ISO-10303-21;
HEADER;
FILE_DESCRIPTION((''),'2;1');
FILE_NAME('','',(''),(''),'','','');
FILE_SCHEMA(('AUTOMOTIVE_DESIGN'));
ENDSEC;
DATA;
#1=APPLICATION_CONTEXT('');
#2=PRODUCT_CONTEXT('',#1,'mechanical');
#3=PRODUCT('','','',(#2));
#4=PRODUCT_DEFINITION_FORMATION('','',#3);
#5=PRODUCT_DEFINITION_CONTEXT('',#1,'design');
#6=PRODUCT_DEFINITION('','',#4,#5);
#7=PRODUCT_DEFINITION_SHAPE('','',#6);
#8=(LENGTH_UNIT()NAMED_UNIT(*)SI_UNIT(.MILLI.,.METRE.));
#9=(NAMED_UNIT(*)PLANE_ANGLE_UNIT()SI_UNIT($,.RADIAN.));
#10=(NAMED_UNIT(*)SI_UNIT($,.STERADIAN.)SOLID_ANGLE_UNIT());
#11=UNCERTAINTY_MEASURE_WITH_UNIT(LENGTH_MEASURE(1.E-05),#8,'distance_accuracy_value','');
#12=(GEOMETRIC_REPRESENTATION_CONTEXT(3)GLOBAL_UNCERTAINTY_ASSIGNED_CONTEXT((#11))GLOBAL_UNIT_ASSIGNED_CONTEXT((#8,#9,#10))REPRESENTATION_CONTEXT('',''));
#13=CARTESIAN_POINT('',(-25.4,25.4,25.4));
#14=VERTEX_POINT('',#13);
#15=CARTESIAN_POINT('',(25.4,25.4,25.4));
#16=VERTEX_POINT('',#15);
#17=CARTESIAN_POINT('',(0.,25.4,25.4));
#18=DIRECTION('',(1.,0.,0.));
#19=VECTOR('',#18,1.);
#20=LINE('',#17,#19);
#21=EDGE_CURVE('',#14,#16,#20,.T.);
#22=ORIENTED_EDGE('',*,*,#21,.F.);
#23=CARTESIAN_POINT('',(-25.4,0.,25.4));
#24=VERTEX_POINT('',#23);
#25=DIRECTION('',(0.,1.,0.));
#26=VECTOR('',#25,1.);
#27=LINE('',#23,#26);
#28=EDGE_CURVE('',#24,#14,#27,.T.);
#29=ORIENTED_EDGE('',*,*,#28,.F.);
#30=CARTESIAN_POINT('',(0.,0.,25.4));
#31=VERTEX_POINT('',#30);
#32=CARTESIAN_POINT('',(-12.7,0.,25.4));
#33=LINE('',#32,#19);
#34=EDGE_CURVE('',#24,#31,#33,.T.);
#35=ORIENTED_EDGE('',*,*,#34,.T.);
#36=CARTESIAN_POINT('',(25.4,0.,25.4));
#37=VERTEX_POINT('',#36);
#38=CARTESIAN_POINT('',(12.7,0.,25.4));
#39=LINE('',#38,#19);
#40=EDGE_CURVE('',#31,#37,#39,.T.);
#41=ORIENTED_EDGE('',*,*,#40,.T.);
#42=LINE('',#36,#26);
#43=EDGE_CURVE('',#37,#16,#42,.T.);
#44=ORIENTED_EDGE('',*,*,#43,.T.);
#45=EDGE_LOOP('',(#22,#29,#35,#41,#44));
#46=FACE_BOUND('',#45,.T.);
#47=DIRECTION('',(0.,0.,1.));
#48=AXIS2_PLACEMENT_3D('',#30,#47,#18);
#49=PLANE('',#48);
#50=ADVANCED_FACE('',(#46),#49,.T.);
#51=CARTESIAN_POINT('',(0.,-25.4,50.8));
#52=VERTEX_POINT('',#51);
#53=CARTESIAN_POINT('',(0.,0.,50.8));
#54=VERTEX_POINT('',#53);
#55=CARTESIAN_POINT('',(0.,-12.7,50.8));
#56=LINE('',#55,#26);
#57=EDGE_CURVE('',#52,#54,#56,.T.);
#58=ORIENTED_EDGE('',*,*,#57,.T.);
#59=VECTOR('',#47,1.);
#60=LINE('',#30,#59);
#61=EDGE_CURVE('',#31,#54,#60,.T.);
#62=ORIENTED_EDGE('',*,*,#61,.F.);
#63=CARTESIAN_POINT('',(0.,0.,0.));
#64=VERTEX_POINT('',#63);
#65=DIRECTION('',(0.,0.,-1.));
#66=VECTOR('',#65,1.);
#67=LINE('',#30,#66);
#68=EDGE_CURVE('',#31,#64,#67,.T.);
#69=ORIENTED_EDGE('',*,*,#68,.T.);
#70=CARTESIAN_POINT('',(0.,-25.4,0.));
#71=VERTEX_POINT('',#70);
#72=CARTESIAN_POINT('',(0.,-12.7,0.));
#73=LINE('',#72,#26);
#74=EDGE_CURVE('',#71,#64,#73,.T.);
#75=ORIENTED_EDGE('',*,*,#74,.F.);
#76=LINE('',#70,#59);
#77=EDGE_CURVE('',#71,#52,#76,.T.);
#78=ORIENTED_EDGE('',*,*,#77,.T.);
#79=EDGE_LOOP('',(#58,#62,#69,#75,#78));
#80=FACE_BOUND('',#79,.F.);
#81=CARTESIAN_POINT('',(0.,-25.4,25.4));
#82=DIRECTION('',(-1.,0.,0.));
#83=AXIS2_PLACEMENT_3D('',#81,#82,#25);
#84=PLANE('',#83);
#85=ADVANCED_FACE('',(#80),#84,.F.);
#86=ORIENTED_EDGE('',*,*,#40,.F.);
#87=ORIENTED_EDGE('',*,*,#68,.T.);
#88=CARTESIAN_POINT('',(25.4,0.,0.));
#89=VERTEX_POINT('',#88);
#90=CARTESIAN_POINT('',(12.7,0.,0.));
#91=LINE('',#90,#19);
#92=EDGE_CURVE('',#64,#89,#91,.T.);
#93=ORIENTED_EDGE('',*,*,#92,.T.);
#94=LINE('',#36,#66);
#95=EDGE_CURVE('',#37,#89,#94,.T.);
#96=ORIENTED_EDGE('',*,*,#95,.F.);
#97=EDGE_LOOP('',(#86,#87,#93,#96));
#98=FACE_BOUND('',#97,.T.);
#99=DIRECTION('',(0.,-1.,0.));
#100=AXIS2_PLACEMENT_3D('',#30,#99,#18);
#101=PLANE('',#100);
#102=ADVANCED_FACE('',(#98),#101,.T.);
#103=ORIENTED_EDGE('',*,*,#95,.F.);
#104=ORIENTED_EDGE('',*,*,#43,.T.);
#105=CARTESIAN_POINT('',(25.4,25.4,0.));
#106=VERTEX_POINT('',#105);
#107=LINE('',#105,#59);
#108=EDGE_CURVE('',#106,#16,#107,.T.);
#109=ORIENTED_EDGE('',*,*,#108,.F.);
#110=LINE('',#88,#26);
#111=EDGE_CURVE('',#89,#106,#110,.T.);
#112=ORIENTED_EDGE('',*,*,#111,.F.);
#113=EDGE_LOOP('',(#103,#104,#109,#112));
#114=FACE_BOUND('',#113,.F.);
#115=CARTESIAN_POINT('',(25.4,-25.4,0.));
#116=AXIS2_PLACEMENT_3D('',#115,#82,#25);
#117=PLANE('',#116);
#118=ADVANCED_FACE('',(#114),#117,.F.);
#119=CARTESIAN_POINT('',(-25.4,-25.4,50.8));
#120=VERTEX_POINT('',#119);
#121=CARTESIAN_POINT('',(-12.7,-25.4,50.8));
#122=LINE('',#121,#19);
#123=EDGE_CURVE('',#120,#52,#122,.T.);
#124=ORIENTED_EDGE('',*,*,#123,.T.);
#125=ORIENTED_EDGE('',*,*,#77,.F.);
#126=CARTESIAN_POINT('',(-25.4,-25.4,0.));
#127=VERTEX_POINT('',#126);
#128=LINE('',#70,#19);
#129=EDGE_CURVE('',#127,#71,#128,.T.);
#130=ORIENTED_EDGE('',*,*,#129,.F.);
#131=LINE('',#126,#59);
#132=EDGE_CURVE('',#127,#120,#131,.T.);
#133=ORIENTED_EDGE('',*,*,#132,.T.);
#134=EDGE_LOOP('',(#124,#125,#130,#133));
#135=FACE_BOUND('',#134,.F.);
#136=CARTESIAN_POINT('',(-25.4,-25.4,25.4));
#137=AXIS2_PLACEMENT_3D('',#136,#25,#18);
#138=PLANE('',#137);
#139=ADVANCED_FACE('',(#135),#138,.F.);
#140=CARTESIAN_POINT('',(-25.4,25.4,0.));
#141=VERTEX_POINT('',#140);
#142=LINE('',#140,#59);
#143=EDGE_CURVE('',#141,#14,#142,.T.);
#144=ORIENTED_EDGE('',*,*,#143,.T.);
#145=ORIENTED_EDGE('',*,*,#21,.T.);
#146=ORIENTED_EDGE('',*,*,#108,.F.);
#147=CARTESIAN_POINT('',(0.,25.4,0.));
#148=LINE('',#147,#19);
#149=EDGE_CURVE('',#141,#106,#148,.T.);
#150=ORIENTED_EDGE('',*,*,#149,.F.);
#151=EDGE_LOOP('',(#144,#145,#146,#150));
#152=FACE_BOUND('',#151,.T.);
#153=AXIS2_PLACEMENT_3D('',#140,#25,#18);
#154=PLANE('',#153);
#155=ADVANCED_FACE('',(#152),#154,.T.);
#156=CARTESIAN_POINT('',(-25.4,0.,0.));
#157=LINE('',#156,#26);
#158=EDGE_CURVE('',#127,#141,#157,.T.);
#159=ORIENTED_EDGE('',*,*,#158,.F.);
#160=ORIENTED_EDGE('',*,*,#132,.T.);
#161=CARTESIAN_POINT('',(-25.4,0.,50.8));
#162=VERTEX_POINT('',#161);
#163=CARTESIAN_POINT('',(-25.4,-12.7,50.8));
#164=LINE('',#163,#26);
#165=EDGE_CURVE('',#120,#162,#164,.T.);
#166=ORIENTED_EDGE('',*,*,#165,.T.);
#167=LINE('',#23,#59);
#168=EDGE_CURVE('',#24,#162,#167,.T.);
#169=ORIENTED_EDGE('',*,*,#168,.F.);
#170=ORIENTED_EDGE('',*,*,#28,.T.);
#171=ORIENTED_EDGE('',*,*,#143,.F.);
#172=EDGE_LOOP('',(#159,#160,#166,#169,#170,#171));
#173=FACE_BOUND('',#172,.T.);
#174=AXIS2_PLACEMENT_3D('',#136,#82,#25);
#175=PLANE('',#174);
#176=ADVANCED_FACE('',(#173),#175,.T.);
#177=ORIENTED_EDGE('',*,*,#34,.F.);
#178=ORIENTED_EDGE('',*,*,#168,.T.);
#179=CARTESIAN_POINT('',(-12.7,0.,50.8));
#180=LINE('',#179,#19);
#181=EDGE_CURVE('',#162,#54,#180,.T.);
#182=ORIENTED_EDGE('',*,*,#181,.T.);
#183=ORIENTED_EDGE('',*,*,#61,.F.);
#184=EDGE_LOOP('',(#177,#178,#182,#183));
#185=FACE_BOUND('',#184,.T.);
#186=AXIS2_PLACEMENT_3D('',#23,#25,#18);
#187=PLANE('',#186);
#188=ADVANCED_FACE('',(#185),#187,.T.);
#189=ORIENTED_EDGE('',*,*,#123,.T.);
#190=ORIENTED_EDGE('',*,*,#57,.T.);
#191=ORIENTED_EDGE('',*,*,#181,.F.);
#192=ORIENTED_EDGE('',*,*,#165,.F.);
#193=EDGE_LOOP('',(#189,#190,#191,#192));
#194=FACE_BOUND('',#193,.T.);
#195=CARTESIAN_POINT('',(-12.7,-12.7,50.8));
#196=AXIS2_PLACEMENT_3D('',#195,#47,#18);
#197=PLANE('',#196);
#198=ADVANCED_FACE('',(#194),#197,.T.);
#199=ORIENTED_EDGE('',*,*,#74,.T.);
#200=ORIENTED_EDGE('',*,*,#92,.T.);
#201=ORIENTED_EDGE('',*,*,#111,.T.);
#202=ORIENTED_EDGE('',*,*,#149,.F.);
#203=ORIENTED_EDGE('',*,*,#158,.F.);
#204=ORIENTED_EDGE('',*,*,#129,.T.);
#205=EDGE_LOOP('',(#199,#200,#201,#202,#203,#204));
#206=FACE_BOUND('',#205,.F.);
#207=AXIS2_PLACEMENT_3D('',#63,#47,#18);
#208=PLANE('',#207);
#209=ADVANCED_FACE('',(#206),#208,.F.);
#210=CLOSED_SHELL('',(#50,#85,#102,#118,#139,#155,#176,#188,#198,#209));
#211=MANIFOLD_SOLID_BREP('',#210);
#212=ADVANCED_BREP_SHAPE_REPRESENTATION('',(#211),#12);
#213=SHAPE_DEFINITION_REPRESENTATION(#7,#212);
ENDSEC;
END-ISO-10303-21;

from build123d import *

# Parameters (mm, degrees)
F1_W     = 50.8
F1_H     = 50.8
F2_DEPTH = 25.4
F3_W     = 25.4
F3_H     = 25.4
F4_DEPTH = 25.4
F5_W     = 25.4
F5_H     = 25.4
F6_DEPTH = 25.4


# Not quite as in the source:
# - a variable given as a bare number and used for a length is read in inches; the dataset says mm whatever the document's units were


with BuildPart() as f2:
    # F1 (on Top) → F2 (new body)
    with BuildSketch(Plane.XY):
        Rectangle(F1_W, F1_H)
    extrude(amount=F2_DEPTH)

    # F3 (on face) → F4 (cut)
    with BuildSketch(Plane.XY.offset(25.4)):
        with Locations((12.7, -12.7)):
            Rectangle(F3_W, F3_H)
    extrude(amount=-F4_DEPTH, mode=Mode.SUBTRACT)

    # F5 (on face) → F6 (join)
    with BuildSketch(Plane.XY.offset(25.4)):
        with Locations((-12.7, -12.7)):
            Rectangle(F5_W, F5_H)
    extrude(amount=F6_DEPTH)


solid = f2.part
